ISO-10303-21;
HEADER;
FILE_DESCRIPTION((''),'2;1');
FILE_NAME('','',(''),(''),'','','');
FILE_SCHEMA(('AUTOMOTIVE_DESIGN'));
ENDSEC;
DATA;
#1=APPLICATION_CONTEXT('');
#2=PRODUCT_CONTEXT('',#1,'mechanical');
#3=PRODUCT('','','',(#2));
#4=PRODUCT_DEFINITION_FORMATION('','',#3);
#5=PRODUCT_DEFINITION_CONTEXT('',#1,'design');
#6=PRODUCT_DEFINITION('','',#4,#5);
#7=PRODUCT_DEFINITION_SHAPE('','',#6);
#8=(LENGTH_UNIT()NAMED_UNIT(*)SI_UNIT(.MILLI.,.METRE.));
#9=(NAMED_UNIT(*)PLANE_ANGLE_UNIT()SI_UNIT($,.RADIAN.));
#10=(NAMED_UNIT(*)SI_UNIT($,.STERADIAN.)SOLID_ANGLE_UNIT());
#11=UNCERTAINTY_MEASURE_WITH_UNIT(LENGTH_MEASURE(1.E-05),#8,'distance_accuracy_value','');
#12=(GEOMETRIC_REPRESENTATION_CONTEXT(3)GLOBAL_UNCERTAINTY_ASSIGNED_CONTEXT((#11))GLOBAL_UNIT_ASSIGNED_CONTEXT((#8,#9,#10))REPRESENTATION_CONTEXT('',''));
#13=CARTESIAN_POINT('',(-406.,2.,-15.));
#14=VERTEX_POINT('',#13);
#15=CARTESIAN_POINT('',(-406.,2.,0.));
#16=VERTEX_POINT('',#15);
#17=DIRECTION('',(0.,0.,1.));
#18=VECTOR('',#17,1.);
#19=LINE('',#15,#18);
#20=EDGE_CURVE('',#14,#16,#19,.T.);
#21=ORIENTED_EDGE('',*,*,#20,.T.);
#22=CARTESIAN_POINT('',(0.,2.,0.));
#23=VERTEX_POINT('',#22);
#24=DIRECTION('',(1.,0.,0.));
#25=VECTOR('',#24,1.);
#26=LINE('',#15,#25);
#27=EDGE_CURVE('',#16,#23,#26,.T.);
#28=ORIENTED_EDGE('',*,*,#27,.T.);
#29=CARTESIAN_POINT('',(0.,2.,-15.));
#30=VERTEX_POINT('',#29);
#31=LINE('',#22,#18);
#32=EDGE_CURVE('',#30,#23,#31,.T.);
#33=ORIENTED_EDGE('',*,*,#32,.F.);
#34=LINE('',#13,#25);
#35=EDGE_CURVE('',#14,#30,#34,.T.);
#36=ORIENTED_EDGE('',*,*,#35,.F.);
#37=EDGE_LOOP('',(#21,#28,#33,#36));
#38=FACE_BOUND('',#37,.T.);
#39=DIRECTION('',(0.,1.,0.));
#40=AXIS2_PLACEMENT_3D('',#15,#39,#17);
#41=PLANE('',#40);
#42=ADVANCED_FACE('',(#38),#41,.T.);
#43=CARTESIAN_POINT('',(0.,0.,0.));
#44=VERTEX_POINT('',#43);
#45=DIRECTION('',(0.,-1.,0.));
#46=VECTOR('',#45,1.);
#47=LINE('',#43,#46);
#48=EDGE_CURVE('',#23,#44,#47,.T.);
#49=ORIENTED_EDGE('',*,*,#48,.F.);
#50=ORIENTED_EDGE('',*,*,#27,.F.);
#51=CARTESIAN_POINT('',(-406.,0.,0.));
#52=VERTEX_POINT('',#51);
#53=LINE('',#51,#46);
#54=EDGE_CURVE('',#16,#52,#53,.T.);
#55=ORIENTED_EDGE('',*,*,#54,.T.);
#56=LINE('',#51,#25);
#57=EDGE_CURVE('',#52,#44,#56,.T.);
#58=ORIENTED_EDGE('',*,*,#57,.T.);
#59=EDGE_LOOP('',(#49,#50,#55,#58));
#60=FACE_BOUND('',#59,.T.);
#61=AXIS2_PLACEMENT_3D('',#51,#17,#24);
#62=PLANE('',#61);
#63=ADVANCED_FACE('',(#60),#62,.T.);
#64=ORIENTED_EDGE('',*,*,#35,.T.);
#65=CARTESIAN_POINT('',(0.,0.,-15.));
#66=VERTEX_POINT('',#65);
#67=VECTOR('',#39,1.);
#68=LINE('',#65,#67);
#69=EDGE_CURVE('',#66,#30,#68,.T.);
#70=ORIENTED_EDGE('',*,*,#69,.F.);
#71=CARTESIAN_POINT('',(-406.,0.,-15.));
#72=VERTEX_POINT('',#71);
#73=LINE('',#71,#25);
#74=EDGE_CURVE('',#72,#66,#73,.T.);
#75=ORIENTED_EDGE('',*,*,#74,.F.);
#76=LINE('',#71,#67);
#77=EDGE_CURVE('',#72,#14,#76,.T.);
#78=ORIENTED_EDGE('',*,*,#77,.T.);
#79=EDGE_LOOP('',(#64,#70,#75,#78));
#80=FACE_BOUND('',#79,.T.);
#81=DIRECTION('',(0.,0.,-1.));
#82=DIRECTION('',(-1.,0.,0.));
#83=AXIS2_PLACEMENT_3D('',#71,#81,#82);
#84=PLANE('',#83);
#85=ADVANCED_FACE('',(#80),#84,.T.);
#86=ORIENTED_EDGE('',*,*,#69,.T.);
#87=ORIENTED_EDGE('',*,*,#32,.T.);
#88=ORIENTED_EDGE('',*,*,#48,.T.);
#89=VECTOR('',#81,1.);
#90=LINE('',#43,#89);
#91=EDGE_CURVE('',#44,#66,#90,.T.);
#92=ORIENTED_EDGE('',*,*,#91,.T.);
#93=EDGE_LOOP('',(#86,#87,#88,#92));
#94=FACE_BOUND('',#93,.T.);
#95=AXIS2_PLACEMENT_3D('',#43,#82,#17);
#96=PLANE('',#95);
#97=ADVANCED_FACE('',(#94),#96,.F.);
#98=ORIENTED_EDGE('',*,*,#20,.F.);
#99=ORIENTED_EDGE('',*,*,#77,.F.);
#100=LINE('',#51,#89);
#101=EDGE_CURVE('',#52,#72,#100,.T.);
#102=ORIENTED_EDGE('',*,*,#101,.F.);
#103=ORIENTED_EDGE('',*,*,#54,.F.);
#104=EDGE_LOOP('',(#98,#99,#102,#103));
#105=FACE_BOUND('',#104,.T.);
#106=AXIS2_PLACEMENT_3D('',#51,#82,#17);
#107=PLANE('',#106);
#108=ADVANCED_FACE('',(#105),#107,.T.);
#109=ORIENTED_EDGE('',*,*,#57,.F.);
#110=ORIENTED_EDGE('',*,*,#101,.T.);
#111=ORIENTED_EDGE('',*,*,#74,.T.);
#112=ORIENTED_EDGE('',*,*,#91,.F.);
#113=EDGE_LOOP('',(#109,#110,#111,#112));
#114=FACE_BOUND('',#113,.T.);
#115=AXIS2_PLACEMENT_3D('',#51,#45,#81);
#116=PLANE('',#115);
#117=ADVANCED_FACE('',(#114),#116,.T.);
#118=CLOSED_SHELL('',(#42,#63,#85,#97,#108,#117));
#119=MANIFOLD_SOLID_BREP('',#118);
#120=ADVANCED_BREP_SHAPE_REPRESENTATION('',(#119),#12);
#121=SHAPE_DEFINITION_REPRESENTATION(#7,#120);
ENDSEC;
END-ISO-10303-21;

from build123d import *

# Parameters (mm, degrees)
SKETCH_1_W             = 15
SKETCH_1_H             = 2
SM_BASE_FLANGE_1_DEPTH = 406


# Sheet-metal steps are written as plain solids
with BuildPart() as part:
    # Sketch 1 → Базовая кромка1 (new body)
    with BuildSketch(Plane(origin=(0, 0, 0), x_dir=(0, 0, -1), z_dir=(1, 0, 0))):
        with Locations((7.5, 1)):
            Rectangle(SKETCH_1_W, SKETCH_1_H)
    extrude(amount=-SM_BASE_FLANGE_1_DEPTH)


solid = part.part
